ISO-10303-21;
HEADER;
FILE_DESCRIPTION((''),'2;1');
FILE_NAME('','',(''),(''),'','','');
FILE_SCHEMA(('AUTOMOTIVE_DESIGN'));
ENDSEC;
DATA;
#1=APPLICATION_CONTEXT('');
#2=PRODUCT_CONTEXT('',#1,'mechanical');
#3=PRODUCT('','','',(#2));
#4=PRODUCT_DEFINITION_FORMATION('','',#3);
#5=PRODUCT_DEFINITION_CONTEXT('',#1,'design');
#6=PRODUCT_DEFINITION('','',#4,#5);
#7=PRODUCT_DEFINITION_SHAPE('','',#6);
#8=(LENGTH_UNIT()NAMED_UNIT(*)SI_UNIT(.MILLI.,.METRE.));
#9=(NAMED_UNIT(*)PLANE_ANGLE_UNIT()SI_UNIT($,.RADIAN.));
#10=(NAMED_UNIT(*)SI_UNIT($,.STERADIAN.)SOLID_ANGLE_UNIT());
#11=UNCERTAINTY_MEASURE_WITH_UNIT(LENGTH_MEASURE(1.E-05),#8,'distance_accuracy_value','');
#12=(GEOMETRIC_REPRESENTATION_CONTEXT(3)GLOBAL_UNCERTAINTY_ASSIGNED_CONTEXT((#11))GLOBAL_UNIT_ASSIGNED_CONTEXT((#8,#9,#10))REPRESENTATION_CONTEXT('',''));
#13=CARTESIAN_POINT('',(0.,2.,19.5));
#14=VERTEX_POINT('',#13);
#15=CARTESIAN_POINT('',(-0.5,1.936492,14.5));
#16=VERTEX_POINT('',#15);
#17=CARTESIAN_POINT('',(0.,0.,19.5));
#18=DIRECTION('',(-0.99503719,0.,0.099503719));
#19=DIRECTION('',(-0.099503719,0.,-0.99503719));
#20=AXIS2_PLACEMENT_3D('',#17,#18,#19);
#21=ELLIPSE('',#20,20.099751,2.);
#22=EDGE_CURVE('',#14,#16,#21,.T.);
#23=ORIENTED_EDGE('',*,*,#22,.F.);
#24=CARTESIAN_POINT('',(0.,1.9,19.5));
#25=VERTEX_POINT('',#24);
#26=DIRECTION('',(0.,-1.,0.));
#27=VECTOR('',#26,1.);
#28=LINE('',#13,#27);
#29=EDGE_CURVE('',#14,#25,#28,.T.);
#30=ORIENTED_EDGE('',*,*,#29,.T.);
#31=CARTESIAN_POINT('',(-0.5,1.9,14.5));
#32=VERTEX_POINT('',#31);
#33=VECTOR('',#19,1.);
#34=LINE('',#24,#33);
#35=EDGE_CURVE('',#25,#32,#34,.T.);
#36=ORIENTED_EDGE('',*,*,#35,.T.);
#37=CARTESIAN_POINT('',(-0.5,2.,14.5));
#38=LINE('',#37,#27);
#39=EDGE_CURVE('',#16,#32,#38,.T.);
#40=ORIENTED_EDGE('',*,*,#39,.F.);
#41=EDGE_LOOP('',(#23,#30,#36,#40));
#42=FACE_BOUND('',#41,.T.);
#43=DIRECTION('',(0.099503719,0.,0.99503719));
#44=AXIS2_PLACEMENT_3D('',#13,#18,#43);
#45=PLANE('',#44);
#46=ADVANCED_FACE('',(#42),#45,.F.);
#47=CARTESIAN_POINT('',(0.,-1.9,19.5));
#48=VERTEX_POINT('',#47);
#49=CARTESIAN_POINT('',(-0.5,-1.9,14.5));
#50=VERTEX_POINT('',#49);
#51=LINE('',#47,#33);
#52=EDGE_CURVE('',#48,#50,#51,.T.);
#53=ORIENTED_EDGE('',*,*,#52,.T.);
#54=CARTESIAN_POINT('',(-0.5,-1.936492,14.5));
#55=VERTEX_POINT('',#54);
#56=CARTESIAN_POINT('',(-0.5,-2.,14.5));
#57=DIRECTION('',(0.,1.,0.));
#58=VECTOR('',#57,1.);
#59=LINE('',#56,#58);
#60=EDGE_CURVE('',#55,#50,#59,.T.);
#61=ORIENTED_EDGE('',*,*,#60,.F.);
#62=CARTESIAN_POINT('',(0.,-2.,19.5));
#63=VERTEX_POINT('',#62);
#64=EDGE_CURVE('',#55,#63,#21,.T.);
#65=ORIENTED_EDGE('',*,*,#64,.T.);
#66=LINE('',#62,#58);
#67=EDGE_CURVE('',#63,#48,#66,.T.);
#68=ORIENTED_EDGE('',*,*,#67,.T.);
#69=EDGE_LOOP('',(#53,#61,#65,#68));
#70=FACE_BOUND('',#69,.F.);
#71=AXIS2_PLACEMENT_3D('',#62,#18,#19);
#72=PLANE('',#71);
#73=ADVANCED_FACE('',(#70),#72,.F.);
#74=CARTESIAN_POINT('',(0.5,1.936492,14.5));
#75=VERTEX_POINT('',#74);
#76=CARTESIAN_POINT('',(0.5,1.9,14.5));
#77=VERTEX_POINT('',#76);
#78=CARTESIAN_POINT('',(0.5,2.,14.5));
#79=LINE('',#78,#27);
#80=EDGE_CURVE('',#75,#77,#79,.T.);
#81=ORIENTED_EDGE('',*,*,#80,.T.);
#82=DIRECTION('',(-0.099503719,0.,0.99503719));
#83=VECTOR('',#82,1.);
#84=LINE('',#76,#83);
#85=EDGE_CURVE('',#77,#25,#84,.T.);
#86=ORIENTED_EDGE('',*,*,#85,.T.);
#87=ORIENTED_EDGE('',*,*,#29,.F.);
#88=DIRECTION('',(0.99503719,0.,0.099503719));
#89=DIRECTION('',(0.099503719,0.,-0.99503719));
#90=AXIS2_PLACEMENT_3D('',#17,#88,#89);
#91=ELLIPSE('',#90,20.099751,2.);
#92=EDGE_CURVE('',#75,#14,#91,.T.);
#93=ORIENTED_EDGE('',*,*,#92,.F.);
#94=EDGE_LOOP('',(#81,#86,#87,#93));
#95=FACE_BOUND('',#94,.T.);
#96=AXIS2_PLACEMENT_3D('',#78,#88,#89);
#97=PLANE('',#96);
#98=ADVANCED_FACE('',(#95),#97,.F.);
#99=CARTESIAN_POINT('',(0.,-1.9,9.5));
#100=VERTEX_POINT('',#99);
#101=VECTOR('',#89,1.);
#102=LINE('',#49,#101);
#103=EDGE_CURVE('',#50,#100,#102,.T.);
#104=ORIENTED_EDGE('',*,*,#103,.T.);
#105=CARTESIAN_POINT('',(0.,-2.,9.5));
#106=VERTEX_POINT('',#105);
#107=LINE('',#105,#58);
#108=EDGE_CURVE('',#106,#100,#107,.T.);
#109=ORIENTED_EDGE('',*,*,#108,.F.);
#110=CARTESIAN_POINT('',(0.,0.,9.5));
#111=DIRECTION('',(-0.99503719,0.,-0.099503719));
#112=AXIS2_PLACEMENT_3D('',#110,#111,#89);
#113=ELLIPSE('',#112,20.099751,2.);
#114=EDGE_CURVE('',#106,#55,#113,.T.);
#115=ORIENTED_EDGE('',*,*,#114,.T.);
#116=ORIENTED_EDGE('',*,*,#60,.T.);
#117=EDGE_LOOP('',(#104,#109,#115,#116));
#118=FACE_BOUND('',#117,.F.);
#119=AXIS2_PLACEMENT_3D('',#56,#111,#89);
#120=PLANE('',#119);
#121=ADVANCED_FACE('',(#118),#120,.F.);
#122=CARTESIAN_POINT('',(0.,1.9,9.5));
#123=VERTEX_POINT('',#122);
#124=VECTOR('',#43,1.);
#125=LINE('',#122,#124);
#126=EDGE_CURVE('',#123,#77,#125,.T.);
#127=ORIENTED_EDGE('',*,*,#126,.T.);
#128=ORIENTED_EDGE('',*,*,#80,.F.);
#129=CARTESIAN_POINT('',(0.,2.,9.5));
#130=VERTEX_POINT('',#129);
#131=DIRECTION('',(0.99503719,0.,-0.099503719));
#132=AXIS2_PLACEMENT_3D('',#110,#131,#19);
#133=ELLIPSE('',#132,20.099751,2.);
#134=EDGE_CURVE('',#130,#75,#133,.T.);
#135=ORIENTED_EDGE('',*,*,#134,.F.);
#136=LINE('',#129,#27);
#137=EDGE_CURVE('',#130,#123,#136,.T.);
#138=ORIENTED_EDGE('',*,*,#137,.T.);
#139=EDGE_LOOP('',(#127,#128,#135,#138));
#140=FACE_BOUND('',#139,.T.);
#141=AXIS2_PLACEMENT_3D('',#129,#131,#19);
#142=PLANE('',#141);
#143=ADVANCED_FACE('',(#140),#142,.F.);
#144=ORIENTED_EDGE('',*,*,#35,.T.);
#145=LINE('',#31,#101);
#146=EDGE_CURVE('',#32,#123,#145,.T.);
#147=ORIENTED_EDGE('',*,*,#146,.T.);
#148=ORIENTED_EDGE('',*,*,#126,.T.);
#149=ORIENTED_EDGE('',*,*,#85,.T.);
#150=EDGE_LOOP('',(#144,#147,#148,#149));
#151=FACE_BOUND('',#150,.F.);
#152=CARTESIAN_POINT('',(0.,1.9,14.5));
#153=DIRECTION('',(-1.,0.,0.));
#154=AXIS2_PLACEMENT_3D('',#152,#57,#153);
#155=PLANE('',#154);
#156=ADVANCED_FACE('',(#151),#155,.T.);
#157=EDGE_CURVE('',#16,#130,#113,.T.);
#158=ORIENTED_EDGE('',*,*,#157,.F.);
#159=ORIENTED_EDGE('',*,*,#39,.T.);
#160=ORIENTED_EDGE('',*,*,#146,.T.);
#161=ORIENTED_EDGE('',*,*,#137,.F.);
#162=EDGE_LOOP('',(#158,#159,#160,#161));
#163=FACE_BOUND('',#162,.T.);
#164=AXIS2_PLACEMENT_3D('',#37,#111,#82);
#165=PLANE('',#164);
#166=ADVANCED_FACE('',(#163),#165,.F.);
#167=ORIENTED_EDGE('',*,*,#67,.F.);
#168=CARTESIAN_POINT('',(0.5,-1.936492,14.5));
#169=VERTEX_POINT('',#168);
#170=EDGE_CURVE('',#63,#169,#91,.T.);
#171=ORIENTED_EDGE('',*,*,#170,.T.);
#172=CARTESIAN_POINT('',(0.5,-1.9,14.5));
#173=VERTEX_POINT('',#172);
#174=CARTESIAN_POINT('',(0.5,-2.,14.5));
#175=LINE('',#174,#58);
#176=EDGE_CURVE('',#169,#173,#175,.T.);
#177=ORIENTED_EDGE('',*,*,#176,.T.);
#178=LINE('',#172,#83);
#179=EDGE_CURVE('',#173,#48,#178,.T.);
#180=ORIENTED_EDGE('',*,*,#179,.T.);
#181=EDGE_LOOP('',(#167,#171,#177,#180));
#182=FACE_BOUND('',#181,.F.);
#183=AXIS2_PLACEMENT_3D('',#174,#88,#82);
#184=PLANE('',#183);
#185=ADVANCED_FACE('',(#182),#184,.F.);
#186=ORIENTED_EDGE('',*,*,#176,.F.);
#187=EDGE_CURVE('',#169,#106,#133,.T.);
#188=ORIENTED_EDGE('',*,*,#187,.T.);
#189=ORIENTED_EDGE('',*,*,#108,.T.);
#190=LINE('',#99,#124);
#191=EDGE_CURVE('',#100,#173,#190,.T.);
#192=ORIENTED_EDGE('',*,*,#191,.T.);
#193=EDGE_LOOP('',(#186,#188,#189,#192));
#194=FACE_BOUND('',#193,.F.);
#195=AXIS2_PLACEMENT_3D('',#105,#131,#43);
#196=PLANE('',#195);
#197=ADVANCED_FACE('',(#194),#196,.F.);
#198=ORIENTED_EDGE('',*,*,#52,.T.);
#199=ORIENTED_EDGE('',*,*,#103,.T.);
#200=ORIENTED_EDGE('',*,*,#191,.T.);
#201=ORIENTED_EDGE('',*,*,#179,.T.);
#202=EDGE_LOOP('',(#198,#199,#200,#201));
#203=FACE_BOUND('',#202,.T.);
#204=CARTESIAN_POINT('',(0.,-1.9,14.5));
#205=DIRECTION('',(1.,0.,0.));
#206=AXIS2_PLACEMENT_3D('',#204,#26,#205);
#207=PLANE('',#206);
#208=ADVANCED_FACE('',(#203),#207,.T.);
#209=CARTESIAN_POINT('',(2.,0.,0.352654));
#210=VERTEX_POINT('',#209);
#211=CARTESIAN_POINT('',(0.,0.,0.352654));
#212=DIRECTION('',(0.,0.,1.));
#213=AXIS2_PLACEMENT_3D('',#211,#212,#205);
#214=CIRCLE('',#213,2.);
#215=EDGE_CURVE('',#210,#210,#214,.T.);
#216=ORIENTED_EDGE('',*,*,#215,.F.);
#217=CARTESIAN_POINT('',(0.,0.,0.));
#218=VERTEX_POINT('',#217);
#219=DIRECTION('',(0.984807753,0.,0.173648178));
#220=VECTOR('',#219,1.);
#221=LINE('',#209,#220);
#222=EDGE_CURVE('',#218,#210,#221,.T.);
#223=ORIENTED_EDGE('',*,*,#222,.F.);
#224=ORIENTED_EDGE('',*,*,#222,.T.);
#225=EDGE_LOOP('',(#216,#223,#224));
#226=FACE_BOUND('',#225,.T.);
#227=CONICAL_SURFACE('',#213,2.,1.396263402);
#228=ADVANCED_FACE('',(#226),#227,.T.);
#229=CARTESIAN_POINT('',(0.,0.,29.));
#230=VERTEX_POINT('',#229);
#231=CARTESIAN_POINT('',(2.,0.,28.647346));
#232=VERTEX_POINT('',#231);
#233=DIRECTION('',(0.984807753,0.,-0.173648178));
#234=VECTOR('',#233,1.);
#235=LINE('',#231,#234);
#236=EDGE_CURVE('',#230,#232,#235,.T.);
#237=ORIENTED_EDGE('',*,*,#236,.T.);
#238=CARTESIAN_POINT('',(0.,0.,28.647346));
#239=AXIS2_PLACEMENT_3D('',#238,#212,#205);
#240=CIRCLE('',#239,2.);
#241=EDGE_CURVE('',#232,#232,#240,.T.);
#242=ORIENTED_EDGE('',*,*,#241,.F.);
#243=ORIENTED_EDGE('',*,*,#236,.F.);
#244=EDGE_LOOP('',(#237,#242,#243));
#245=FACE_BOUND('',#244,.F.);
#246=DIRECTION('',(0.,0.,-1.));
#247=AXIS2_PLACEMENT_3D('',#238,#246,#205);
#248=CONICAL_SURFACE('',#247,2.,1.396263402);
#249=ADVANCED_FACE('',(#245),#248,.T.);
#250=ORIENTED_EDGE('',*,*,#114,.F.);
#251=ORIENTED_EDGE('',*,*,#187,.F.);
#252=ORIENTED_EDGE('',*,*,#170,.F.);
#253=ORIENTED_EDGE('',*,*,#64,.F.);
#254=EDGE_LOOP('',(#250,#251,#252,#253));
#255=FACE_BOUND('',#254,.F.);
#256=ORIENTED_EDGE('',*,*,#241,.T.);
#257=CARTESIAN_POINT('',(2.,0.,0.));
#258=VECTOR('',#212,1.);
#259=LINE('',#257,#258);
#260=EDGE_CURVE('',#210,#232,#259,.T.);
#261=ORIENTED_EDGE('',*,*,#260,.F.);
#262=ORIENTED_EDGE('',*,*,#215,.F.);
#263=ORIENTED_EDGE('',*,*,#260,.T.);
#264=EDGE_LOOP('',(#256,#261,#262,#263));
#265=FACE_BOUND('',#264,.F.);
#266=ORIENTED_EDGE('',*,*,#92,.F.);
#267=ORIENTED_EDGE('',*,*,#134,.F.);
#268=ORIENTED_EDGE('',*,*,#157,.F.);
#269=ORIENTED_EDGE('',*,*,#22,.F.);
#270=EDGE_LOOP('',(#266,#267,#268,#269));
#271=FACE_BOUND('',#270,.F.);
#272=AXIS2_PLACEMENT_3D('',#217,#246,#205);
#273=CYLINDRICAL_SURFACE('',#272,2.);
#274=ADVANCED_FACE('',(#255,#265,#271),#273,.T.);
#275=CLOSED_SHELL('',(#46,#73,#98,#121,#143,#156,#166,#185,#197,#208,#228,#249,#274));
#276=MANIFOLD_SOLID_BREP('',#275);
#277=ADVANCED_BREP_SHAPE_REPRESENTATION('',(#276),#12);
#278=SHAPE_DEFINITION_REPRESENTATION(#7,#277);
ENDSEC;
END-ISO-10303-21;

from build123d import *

# Parameters (mm, degrees)
F0_R       = 2
F1_DEPTH   = 29
F2_SIZE2   = 0.3526539614
F2_SIZE    = 2
F2_2_SIZE2 = 0.3526539614
F2_2_SIZE  = 2
F5_DEPTH   = 0.1


# Not quite as in the source:
# - a pattern or mirror of a feature is missing from the dataset's text; its kind, count and spacing are read off the source's solid


with BuildPart() as f1:
    # F0 (on Top) → F1 (new body)
    with BuildSketch(Plane.XY):
        Circle(F0_R)
    extrude(amount=F1_DEPTH)

    # F2
    f2_edges = [f1.edges().sort_by_distance(p)[0] for p in [
        (-2, 0, 29),
    ]]
    f2_side = f1.faces().sort_by_distance((0, 0, 29))[0]
    chamfer(f2_edges, length=F2_SIZE, length2=F2_SIZE2, reference=f2_side)

    # F2#2
    f2_2_edges = [f1.edges().sort_by_distance(p)[0] for p in [
        (-2, 0, 0),
    ]]
    f2_2_side = f1.faces().sort_by_distance((0, 0, 0))[0]
    chamfer(f2_2_edges, length=F2_2_SIZE, length2=F2_2_SIZE2, reference=f2_2_side)

    # F4 (on offset) → F5 (cut)
    with BuildSketch(Plane.XZ.offset(2)):
        Polygon((0.5, 14.5), (0, 19.5), (-0.5, 14.5), (0, 9.5), align=None)
    f5 = extrude(amount=-F5_DEPTH, mode=Mode.SUBTRACT)

    # F5_copies: F5 across plane
    add(f5.mirror(Plane.ZX), mode=Mode.SUBTRACT)


solid = f1.part
